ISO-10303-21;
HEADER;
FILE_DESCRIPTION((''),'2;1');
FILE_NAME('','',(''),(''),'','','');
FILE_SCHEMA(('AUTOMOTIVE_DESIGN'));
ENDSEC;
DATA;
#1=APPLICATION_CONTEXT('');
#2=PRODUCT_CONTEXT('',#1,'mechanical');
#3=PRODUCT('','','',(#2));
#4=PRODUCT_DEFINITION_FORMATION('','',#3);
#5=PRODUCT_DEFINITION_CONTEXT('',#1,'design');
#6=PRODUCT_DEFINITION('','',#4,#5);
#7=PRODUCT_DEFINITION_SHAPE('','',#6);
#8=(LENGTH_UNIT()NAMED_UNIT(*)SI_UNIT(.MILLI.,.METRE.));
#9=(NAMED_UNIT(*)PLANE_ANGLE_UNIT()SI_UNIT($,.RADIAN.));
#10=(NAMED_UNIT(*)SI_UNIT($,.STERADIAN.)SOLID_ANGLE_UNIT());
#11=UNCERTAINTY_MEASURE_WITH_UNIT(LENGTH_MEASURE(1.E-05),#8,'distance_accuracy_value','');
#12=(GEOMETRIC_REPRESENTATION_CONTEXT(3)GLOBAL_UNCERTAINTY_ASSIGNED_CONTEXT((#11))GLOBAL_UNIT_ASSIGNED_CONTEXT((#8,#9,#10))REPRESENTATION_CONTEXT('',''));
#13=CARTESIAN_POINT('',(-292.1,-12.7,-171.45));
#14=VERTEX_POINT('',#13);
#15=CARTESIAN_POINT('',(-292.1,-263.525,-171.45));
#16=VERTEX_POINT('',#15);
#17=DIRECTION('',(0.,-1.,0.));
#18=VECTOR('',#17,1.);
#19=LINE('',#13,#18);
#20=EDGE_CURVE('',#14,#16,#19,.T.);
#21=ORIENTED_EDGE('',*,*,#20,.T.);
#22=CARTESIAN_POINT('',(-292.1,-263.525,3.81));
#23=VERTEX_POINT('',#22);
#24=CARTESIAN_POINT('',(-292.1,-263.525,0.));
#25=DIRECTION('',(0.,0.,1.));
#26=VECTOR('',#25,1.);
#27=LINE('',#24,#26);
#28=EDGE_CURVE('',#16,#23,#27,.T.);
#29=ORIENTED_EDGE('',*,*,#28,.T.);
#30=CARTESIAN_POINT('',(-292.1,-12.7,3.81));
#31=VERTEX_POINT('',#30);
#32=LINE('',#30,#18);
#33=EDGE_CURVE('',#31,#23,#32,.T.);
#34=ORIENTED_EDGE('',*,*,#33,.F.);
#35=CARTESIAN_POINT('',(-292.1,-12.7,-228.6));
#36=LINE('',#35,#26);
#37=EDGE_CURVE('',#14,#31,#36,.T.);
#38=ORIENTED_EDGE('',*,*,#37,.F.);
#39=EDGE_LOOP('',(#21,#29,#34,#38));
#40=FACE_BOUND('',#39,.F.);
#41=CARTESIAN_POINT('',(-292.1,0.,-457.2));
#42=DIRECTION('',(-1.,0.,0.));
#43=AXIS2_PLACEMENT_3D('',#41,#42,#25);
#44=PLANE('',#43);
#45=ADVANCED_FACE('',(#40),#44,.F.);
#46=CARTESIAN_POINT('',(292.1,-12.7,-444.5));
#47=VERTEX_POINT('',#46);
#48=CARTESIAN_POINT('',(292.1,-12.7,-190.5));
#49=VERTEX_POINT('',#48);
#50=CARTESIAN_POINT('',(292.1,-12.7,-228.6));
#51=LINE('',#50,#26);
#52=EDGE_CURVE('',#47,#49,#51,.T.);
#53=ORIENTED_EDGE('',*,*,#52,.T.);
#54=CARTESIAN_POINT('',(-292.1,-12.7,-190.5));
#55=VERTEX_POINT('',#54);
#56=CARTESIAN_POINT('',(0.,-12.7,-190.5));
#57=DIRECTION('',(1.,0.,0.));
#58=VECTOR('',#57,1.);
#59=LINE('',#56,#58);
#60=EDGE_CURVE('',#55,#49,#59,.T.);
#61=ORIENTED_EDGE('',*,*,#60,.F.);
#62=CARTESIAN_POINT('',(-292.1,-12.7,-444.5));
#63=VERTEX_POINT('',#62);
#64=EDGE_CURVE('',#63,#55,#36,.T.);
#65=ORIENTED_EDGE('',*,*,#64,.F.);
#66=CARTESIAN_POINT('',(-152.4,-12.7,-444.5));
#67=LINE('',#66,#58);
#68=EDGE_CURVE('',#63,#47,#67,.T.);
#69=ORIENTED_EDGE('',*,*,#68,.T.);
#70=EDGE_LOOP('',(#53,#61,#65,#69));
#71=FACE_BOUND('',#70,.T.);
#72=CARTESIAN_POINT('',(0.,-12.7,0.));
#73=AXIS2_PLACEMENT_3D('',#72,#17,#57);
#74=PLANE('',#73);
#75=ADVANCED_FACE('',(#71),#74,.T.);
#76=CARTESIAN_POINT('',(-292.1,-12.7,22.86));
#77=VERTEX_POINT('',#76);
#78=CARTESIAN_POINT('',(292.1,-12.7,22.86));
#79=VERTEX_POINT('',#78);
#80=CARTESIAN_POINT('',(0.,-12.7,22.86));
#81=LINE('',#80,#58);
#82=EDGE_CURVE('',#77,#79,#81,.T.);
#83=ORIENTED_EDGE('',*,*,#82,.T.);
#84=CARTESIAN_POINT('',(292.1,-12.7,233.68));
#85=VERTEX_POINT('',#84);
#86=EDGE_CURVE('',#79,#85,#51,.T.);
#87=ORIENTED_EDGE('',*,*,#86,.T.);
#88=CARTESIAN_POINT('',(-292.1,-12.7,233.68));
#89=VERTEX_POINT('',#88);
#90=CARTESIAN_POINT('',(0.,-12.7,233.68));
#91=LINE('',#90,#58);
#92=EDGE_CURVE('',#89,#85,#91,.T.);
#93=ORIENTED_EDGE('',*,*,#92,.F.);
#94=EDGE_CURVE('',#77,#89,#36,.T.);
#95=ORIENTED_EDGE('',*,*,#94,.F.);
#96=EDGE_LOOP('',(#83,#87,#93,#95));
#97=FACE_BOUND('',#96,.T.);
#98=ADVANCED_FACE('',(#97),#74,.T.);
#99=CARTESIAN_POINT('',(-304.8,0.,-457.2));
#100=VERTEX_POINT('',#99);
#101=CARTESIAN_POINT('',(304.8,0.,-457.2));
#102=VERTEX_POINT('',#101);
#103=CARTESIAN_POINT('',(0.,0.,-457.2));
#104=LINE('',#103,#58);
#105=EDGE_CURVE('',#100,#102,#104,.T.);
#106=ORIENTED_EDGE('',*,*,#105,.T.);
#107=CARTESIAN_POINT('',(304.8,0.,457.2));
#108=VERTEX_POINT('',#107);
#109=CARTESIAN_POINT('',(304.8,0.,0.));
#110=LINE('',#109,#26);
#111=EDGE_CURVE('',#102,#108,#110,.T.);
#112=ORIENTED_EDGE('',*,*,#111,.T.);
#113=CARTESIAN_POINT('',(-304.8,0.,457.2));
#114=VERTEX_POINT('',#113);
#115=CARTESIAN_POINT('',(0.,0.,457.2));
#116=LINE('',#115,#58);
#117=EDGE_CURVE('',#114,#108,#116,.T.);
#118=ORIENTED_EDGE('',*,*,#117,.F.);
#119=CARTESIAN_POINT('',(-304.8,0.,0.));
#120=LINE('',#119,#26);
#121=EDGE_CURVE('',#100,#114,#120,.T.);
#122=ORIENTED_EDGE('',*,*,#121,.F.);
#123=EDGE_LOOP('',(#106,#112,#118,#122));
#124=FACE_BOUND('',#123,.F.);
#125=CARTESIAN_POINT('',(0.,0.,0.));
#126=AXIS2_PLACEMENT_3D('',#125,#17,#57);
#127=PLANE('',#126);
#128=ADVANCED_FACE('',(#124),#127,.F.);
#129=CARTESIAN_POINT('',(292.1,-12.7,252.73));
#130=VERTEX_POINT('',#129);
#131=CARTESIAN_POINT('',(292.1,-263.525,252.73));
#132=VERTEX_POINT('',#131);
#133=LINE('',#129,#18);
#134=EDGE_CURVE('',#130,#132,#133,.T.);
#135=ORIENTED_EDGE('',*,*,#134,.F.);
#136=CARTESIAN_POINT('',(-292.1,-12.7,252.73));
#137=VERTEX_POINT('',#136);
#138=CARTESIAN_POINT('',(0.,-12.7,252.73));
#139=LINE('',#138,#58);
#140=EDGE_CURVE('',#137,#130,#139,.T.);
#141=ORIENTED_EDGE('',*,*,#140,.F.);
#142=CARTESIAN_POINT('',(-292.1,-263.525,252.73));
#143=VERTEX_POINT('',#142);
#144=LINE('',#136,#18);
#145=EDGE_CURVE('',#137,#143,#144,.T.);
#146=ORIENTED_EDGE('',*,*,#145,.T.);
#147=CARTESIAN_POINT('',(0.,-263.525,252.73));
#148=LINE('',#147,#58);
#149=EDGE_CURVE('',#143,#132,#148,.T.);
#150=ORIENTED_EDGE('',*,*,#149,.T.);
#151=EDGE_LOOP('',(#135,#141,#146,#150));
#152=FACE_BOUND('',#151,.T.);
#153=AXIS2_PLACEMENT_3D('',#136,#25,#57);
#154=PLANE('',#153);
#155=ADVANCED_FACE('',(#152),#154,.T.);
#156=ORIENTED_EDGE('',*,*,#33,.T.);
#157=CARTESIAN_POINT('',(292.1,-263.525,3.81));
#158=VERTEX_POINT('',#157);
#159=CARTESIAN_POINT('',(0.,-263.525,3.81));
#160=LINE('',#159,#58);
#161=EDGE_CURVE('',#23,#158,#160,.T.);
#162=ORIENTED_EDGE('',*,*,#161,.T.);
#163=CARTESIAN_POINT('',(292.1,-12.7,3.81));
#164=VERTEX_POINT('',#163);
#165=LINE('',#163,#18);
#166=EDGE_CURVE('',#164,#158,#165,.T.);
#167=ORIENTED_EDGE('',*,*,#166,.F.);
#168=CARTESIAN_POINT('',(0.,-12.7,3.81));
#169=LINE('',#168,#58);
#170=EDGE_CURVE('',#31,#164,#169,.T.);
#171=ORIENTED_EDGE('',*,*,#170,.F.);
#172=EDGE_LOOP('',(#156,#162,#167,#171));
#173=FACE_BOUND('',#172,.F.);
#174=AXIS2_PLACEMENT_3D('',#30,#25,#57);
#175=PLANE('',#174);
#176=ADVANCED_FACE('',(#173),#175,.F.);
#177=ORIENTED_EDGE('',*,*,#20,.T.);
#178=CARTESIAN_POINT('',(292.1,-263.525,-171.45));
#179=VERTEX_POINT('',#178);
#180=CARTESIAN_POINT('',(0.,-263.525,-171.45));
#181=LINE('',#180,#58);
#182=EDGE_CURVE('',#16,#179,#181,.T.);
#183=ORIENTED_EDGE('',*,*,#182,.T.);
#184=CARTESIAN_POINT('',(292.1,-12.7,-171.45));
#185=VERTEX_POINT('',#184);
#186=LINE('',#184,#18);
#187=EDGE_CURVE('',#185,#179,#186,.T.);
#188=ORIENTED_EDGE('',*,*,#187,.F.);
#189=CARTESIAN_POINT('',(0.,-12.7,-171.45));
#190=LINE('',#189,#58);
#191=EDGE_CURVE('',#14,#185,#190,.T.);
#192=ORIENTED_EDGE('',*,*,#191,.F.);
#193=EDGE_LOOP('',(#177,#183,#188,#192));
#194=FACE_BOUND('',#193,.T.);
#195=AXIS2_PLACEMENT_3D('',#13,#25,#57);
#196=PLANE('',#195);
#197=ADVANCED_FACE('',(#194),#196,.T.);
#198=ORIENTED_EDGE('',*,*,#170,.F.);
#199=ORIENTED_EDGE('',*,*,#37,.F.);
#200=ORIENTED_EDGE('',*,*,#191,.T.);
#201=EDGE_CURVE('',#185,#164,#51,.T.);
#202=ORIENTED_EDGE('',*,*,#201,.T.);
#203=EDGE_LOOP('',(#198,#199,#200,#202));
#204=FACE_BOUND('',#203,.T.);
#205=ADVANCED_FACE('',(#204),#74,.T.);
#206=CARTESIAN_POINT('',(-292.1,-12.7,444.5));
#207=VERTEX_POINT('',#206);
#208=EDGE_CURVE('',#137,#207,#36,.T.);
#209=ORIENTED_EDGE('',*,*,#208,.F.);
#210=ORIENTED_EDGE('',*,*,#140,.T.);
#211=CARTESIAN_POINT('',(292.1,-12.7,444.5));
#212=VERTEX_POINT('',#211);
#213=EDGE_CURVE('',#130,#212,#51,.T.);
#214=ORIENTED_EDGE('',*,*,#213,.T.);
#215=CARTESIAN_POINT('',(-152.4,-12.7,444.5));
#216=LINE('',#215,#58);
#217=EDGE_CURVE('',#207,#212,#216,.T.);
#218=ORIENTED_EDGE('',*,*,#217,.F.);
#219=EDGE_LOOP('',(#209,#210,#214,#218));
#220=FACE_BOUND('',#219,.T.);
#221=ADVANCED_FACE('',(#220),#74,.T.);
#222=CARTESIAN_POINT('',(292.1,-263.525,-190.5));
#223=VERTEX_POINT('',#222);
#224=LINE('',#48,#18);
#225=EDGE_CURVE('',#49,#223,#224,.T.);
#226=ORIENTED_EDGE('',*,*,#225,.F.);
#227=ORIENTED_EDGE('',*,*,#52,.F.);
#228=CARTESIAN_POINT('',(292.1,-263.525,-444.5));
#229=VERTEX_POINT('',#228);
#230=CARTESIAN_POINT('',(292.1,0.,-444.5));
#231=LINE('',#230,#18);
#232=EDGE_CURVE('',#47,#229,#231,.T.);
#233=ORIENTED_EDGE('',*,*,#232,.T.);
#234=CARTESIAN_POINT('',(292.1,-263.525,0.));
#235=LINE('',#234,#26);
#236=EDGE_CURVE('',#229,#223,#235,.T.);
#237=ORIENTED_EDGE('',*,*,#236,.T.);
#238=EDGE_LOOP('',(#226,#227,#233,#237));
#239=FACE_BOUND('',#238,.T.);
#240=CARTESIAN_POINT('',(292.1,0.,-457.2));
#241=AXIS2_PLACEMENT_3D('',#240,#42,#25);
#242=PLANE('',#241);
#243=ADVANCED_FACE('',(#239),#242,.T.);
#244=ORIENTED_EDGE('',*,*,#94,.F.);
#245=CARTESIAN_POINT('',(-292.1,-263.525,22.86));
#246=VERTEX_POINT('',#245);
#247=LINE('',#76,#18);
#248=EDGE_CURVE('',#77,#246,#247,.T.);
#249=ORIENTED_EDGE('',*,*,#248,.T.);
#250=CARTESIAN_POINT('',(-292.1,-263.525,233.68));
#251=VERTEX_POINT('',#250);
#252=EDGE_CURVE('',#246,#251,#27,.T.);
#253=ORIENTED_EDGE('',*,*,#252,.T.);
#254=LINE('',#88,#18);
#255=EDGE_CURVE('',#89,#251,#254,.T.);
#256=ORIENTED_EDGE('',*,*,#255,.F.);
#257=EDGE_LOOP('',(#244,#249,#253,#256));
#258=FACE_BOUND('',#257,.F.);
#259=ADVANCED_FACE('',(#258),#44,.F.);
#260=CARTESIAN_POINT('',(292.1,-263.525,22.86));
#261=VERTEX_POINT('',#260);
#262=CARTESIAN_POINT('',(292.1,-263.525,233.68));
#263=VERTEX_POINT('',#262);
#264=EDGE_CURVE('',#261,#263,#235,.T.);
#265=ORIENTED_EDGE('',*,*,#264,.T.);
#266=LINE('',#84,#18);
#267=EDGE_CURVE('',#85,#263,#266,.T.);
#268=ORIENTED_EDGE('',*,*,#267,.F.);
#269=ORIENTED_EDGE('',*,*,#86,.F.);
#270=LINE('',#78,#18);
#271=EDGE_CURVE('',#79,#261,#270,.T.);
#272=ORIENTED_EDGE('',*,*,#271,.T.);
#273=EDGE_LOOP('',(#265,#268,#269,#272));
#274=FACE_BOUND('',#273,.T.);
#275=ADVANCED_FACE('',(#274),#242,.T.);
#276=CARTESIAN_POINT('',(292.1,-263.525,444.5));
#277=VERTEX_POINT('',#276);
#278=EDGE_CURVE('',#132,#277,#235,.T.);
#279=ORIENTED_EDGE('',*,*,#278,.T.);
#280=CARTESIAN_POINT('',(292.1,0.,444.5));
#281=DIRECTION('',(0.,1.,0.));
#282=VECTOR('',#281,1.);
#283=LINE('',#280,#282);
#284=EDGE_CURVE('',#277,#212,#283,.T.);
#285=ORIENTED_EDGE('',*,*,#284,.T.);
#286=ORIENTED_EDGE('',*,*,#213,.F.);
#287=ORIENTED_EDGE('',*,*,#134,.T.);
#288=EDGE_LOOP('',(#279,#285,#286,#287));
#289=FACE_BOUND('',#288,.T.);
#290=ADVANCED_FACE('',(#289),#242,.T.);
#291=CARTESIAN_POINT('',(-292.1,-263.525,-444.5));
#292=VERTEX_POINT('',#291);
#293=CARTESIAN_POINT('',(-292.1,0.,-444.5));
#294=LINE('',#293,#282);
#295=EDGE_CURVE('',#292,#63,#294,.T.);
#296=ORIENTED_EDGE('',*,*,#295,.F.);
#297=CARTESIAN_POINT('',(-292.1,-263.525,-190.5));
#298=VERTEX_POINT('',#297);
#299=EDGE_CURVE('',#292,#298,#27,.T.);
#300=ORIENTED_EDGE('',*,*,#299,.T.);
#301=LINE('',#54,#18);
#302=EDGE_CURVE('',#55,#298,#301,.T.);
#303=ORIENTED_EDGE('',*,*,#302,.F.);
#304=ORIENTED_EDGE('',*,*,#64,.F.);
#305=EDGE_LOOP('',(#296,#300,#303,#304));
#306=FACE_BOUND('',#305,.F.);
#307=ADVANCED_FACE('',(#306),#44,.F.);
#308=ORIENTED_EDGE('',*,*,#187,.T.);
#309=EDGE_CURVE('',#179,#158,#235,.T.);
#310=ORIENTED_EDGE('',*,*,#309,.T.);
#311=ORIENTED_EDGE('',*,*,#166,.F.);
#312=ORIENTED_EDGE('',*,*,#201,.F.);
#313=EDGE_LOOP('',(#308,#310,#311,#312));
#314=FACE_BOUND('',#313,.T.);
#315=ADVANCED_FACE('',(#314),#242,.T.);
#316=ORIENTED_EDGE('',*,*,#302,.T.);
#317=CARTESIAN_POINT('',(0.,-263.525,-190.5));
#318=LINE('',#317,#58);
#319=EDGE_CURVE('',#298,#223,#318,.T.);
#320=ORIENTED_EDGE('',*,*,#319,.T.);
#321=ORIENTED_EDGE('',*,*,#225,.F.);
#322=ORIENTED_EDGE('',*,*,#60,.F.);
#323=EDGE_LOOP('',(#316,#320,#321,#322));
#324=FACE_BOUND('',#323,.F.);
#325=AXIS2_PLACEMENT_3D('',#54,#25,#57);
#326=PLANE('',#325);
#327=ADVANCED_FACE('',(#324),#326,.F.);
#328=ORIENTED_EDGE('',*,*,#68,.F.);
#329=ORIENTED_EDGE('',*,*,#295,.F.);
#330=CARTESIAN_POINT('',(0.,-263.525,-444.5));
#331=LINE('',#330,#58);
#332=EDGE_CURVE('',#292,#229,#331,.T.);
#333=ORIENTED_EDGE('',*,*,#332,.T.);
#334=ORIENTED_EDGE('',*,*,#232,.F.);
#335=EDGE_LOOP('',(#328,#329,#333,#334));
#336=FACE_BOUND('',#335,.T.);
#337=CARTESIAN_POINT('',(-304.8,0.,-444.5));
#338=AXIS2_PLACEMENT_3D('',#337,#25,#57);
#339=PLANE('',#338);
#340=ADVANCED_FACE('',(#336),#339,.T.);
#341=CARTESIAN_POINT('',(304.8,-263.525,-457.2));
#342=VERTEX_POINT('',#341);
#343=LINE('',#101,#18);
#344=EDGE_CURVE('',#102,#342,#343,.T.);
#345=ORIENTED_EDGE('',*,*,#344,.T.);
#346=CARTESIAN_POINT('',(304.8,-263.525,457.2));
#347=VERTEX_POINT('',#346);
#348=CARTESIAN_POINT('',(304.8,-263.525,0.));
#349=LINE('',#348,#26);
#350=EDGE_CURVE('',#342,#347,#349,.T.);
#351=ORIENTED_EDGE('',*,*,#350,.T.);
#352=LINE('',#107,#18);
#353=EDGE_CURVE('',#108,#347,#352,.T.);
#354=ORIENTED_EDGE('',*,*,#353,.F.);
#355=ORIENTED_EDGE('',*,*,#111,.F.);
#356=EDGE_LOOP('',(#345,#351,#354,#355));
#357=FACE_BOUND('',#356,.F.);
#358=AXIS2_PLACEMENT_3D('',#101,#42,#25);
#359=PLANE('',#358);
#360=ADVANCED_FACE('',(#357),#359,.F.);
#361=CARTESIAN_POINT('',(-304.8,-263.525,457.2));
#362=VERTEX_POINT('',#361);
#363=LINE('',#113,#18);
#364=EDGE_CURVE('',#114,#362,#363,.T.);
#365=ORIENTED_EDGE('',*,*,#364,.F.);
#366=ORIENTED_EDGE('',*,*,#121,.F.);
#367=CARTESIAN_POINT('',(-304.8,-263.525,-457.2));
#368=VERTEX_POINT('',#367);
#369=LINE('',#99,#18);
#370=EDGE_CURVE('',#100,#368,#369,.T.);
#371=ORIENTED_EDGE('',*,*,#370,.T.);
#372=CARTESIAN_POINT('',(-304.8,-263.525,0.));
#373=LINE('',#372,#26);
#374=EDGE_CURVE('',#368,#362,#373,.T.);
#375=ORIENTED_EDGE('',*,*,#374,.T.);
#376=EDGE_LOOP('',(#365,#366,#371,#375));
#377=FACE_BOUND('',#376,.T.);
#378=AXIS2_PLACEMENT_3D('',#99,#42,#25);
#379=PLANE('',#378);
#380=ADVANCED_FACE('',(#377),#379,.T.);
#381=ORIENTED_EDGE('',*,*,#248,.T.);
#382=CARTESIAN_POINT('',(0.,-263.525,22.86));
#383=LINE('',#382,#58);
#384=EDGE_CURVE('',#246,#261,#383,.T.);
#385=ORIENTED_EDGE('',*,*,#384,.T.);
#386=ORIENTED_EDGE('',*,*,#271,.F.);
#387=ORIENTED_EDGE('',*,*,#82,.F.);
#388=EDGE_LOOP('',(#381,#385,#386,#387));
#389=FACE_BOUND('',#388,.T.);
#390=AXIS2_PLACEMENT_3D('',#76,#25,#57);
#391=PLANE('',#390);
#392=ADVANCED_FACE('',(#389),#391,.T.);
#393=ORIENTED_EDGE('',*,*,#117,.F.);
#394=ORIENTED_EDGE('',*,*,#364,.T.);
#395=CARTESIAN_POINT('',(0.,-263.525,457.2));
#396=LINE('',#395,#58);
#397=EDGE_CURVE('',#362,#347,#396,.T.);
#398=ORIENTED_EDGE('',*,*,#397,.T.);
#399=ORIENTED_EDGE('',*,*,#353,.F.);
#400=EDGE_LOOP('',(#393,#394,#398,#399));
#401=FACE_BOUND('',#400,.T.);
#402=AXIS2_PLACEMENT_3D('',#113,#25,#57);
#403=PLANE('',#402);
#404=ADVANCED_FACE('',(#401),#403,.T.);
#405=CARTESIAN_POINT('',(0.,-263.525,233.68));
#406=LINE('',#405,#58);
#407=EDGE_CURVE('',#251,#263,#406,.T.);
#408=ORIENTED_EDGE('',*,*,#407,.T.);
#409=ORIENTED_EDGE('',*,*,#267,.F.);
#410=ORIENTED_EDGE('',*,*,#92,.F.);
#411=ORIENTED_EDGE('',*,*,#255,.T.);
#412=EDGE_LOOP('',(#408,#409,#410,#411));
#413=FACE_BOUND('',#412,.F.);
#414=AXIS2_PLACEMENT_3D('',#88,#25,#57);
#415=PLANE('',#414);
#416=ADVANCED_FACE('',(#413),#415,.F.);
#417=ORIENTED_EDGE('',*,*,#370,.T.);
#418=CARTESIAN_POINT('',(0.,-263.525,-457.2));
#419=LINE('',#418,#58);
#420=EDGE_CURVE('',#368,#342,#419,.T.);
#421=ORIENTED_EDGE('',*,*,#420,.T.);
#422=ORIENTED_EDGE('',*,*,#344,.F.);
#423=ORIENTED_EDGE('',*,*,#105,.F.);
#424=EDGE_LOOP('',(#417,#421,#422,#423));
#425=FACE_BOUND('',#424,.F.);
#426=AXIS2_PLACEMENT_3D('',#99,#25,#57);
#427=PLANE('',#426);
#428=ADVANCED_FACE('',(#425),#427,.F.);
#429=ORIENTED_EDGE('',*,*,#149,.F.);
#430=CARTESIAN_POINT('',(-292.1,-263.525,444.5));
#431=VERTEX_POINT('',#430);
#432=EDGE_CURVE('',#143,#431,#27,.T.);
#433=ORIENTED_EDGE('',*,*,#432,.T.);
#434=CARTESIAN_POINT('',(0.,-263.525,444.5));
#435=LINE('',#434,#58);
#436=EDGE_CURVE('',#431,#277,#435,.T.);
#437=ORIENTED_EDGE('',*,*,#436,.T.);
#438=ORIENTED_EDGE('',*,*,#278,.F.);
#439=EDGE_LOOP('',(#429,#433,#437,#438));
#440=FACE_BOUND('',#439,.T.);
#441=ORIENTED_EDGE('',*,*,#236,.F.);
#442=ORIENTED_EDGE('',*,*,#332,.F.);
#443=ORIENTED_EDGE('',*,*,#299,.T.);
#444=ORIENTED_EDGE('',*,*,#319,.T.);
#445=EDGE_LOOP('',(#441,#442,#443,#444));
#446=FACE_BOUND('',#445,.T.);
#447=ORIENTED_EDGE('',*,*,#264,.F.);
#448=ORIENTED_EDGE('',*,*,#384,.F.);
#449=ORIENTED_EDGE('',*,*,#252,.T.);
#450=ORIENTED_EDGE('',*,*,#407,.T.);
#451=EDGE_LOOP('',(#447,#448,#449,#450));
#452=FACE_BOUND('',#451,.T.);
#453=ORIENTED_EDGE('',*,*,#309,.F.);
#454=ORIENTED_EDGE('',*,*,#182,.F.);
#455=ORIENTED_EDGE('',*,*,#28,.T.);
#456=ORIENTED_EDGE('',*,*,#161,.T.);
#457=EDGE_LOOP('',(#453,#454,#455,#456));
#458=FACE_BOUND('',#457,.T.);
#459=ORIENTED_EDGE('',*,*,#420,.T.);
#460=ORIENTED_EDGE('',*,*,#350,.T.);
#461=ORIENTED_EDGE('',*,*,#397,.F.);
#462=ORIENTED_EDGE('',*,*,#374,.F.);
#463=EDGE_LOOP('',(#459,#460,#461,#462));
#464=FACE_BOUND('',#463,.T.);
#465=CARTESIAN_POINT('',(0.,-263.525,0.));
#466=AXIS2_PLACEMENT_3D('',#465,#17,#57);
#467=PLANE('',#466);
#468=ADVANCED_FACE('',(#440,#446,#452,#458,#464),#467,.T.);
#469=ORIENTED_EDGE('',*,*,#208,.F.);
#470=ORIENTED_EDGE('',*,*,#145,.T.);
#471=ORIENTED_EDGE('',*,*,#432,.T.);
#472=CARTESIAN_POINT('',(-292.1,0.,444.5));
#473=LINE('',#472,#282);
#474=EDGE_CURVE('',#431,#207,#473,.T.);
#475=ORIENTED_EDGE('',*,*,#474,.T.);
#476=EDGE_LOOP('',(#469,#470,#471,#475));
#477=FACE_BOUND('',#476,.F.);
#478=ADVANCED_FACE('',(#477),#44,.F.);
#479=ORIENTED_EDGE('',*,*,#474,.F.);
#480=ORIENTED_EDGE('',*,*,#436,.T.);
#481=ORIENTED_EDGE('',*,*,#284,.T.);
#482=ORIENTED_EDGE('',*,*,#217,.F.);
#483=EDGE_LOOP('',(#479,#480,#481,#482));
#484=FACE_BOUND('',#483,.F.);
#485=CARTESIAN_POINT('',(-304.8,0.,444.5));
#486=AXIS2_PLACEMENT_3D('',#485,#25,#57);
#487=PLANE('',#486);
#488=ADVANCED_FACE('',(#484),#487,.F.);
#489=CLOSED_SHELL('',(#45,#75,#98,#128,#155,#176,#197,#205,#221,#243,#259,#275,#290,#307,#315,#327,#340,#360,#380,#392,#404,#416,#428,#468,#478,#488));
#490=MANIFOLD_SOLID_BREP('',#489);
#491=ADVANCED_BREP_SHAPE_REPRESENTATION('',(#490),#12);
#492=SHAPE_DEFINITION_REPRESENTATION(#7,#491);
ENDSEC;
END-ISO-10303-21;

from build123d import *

# Parameters (mm, degrees)
F0_W     = 609.6
F0_H     = 914.4
F1_DEPTH = 263.525
F2_T     = -12.7
F3_W     = 584.2
F3_H     = 19.05
F4_DEPTH = 250.825
F5_W     = 584.2
F5_H     = 19.05
F6_DEPTH = 250.825


# Not quite as in the source:
# - the program builds the solid bodies; features that only make, move or delete a surface that nothing else refers to are left out


with BuildPart() as f1:
    # F0 (on Front) → F1 (new body)
    with BuildSketch(Plane.XZ):
        Rectangle(F0_W, F0_H)
    extrude(amount=F1_DEPTH)

    # F2
    f2_openings = [f1.faces().sort_by_distance(p)[0] for p in [
        (0, -263.525, 0),
    ]]
    offset(amount=F2_T, openings=f2_openings)

    # F3 (on face) → F4 (join)
    with BuildSketch(Plane.XZ.offset(12.7)):
        with Locations((0, -180.975)):
            Rectangle(F3_W, F3_H)
    extrude(amount=F4_DEPTH)

    # F5 (on face) → F6 (join)
    with BuildSketch(Plane.XZ.offset(12.7)):
        with Locations((0, 13.335)):
            Rectangle(F5_W, F5_H)
        with Locations((0, 243.205)):
            Rectangle(F5_W, F5_H)
    extrude(amount=F6_DEPTH)


solid = f1.part
